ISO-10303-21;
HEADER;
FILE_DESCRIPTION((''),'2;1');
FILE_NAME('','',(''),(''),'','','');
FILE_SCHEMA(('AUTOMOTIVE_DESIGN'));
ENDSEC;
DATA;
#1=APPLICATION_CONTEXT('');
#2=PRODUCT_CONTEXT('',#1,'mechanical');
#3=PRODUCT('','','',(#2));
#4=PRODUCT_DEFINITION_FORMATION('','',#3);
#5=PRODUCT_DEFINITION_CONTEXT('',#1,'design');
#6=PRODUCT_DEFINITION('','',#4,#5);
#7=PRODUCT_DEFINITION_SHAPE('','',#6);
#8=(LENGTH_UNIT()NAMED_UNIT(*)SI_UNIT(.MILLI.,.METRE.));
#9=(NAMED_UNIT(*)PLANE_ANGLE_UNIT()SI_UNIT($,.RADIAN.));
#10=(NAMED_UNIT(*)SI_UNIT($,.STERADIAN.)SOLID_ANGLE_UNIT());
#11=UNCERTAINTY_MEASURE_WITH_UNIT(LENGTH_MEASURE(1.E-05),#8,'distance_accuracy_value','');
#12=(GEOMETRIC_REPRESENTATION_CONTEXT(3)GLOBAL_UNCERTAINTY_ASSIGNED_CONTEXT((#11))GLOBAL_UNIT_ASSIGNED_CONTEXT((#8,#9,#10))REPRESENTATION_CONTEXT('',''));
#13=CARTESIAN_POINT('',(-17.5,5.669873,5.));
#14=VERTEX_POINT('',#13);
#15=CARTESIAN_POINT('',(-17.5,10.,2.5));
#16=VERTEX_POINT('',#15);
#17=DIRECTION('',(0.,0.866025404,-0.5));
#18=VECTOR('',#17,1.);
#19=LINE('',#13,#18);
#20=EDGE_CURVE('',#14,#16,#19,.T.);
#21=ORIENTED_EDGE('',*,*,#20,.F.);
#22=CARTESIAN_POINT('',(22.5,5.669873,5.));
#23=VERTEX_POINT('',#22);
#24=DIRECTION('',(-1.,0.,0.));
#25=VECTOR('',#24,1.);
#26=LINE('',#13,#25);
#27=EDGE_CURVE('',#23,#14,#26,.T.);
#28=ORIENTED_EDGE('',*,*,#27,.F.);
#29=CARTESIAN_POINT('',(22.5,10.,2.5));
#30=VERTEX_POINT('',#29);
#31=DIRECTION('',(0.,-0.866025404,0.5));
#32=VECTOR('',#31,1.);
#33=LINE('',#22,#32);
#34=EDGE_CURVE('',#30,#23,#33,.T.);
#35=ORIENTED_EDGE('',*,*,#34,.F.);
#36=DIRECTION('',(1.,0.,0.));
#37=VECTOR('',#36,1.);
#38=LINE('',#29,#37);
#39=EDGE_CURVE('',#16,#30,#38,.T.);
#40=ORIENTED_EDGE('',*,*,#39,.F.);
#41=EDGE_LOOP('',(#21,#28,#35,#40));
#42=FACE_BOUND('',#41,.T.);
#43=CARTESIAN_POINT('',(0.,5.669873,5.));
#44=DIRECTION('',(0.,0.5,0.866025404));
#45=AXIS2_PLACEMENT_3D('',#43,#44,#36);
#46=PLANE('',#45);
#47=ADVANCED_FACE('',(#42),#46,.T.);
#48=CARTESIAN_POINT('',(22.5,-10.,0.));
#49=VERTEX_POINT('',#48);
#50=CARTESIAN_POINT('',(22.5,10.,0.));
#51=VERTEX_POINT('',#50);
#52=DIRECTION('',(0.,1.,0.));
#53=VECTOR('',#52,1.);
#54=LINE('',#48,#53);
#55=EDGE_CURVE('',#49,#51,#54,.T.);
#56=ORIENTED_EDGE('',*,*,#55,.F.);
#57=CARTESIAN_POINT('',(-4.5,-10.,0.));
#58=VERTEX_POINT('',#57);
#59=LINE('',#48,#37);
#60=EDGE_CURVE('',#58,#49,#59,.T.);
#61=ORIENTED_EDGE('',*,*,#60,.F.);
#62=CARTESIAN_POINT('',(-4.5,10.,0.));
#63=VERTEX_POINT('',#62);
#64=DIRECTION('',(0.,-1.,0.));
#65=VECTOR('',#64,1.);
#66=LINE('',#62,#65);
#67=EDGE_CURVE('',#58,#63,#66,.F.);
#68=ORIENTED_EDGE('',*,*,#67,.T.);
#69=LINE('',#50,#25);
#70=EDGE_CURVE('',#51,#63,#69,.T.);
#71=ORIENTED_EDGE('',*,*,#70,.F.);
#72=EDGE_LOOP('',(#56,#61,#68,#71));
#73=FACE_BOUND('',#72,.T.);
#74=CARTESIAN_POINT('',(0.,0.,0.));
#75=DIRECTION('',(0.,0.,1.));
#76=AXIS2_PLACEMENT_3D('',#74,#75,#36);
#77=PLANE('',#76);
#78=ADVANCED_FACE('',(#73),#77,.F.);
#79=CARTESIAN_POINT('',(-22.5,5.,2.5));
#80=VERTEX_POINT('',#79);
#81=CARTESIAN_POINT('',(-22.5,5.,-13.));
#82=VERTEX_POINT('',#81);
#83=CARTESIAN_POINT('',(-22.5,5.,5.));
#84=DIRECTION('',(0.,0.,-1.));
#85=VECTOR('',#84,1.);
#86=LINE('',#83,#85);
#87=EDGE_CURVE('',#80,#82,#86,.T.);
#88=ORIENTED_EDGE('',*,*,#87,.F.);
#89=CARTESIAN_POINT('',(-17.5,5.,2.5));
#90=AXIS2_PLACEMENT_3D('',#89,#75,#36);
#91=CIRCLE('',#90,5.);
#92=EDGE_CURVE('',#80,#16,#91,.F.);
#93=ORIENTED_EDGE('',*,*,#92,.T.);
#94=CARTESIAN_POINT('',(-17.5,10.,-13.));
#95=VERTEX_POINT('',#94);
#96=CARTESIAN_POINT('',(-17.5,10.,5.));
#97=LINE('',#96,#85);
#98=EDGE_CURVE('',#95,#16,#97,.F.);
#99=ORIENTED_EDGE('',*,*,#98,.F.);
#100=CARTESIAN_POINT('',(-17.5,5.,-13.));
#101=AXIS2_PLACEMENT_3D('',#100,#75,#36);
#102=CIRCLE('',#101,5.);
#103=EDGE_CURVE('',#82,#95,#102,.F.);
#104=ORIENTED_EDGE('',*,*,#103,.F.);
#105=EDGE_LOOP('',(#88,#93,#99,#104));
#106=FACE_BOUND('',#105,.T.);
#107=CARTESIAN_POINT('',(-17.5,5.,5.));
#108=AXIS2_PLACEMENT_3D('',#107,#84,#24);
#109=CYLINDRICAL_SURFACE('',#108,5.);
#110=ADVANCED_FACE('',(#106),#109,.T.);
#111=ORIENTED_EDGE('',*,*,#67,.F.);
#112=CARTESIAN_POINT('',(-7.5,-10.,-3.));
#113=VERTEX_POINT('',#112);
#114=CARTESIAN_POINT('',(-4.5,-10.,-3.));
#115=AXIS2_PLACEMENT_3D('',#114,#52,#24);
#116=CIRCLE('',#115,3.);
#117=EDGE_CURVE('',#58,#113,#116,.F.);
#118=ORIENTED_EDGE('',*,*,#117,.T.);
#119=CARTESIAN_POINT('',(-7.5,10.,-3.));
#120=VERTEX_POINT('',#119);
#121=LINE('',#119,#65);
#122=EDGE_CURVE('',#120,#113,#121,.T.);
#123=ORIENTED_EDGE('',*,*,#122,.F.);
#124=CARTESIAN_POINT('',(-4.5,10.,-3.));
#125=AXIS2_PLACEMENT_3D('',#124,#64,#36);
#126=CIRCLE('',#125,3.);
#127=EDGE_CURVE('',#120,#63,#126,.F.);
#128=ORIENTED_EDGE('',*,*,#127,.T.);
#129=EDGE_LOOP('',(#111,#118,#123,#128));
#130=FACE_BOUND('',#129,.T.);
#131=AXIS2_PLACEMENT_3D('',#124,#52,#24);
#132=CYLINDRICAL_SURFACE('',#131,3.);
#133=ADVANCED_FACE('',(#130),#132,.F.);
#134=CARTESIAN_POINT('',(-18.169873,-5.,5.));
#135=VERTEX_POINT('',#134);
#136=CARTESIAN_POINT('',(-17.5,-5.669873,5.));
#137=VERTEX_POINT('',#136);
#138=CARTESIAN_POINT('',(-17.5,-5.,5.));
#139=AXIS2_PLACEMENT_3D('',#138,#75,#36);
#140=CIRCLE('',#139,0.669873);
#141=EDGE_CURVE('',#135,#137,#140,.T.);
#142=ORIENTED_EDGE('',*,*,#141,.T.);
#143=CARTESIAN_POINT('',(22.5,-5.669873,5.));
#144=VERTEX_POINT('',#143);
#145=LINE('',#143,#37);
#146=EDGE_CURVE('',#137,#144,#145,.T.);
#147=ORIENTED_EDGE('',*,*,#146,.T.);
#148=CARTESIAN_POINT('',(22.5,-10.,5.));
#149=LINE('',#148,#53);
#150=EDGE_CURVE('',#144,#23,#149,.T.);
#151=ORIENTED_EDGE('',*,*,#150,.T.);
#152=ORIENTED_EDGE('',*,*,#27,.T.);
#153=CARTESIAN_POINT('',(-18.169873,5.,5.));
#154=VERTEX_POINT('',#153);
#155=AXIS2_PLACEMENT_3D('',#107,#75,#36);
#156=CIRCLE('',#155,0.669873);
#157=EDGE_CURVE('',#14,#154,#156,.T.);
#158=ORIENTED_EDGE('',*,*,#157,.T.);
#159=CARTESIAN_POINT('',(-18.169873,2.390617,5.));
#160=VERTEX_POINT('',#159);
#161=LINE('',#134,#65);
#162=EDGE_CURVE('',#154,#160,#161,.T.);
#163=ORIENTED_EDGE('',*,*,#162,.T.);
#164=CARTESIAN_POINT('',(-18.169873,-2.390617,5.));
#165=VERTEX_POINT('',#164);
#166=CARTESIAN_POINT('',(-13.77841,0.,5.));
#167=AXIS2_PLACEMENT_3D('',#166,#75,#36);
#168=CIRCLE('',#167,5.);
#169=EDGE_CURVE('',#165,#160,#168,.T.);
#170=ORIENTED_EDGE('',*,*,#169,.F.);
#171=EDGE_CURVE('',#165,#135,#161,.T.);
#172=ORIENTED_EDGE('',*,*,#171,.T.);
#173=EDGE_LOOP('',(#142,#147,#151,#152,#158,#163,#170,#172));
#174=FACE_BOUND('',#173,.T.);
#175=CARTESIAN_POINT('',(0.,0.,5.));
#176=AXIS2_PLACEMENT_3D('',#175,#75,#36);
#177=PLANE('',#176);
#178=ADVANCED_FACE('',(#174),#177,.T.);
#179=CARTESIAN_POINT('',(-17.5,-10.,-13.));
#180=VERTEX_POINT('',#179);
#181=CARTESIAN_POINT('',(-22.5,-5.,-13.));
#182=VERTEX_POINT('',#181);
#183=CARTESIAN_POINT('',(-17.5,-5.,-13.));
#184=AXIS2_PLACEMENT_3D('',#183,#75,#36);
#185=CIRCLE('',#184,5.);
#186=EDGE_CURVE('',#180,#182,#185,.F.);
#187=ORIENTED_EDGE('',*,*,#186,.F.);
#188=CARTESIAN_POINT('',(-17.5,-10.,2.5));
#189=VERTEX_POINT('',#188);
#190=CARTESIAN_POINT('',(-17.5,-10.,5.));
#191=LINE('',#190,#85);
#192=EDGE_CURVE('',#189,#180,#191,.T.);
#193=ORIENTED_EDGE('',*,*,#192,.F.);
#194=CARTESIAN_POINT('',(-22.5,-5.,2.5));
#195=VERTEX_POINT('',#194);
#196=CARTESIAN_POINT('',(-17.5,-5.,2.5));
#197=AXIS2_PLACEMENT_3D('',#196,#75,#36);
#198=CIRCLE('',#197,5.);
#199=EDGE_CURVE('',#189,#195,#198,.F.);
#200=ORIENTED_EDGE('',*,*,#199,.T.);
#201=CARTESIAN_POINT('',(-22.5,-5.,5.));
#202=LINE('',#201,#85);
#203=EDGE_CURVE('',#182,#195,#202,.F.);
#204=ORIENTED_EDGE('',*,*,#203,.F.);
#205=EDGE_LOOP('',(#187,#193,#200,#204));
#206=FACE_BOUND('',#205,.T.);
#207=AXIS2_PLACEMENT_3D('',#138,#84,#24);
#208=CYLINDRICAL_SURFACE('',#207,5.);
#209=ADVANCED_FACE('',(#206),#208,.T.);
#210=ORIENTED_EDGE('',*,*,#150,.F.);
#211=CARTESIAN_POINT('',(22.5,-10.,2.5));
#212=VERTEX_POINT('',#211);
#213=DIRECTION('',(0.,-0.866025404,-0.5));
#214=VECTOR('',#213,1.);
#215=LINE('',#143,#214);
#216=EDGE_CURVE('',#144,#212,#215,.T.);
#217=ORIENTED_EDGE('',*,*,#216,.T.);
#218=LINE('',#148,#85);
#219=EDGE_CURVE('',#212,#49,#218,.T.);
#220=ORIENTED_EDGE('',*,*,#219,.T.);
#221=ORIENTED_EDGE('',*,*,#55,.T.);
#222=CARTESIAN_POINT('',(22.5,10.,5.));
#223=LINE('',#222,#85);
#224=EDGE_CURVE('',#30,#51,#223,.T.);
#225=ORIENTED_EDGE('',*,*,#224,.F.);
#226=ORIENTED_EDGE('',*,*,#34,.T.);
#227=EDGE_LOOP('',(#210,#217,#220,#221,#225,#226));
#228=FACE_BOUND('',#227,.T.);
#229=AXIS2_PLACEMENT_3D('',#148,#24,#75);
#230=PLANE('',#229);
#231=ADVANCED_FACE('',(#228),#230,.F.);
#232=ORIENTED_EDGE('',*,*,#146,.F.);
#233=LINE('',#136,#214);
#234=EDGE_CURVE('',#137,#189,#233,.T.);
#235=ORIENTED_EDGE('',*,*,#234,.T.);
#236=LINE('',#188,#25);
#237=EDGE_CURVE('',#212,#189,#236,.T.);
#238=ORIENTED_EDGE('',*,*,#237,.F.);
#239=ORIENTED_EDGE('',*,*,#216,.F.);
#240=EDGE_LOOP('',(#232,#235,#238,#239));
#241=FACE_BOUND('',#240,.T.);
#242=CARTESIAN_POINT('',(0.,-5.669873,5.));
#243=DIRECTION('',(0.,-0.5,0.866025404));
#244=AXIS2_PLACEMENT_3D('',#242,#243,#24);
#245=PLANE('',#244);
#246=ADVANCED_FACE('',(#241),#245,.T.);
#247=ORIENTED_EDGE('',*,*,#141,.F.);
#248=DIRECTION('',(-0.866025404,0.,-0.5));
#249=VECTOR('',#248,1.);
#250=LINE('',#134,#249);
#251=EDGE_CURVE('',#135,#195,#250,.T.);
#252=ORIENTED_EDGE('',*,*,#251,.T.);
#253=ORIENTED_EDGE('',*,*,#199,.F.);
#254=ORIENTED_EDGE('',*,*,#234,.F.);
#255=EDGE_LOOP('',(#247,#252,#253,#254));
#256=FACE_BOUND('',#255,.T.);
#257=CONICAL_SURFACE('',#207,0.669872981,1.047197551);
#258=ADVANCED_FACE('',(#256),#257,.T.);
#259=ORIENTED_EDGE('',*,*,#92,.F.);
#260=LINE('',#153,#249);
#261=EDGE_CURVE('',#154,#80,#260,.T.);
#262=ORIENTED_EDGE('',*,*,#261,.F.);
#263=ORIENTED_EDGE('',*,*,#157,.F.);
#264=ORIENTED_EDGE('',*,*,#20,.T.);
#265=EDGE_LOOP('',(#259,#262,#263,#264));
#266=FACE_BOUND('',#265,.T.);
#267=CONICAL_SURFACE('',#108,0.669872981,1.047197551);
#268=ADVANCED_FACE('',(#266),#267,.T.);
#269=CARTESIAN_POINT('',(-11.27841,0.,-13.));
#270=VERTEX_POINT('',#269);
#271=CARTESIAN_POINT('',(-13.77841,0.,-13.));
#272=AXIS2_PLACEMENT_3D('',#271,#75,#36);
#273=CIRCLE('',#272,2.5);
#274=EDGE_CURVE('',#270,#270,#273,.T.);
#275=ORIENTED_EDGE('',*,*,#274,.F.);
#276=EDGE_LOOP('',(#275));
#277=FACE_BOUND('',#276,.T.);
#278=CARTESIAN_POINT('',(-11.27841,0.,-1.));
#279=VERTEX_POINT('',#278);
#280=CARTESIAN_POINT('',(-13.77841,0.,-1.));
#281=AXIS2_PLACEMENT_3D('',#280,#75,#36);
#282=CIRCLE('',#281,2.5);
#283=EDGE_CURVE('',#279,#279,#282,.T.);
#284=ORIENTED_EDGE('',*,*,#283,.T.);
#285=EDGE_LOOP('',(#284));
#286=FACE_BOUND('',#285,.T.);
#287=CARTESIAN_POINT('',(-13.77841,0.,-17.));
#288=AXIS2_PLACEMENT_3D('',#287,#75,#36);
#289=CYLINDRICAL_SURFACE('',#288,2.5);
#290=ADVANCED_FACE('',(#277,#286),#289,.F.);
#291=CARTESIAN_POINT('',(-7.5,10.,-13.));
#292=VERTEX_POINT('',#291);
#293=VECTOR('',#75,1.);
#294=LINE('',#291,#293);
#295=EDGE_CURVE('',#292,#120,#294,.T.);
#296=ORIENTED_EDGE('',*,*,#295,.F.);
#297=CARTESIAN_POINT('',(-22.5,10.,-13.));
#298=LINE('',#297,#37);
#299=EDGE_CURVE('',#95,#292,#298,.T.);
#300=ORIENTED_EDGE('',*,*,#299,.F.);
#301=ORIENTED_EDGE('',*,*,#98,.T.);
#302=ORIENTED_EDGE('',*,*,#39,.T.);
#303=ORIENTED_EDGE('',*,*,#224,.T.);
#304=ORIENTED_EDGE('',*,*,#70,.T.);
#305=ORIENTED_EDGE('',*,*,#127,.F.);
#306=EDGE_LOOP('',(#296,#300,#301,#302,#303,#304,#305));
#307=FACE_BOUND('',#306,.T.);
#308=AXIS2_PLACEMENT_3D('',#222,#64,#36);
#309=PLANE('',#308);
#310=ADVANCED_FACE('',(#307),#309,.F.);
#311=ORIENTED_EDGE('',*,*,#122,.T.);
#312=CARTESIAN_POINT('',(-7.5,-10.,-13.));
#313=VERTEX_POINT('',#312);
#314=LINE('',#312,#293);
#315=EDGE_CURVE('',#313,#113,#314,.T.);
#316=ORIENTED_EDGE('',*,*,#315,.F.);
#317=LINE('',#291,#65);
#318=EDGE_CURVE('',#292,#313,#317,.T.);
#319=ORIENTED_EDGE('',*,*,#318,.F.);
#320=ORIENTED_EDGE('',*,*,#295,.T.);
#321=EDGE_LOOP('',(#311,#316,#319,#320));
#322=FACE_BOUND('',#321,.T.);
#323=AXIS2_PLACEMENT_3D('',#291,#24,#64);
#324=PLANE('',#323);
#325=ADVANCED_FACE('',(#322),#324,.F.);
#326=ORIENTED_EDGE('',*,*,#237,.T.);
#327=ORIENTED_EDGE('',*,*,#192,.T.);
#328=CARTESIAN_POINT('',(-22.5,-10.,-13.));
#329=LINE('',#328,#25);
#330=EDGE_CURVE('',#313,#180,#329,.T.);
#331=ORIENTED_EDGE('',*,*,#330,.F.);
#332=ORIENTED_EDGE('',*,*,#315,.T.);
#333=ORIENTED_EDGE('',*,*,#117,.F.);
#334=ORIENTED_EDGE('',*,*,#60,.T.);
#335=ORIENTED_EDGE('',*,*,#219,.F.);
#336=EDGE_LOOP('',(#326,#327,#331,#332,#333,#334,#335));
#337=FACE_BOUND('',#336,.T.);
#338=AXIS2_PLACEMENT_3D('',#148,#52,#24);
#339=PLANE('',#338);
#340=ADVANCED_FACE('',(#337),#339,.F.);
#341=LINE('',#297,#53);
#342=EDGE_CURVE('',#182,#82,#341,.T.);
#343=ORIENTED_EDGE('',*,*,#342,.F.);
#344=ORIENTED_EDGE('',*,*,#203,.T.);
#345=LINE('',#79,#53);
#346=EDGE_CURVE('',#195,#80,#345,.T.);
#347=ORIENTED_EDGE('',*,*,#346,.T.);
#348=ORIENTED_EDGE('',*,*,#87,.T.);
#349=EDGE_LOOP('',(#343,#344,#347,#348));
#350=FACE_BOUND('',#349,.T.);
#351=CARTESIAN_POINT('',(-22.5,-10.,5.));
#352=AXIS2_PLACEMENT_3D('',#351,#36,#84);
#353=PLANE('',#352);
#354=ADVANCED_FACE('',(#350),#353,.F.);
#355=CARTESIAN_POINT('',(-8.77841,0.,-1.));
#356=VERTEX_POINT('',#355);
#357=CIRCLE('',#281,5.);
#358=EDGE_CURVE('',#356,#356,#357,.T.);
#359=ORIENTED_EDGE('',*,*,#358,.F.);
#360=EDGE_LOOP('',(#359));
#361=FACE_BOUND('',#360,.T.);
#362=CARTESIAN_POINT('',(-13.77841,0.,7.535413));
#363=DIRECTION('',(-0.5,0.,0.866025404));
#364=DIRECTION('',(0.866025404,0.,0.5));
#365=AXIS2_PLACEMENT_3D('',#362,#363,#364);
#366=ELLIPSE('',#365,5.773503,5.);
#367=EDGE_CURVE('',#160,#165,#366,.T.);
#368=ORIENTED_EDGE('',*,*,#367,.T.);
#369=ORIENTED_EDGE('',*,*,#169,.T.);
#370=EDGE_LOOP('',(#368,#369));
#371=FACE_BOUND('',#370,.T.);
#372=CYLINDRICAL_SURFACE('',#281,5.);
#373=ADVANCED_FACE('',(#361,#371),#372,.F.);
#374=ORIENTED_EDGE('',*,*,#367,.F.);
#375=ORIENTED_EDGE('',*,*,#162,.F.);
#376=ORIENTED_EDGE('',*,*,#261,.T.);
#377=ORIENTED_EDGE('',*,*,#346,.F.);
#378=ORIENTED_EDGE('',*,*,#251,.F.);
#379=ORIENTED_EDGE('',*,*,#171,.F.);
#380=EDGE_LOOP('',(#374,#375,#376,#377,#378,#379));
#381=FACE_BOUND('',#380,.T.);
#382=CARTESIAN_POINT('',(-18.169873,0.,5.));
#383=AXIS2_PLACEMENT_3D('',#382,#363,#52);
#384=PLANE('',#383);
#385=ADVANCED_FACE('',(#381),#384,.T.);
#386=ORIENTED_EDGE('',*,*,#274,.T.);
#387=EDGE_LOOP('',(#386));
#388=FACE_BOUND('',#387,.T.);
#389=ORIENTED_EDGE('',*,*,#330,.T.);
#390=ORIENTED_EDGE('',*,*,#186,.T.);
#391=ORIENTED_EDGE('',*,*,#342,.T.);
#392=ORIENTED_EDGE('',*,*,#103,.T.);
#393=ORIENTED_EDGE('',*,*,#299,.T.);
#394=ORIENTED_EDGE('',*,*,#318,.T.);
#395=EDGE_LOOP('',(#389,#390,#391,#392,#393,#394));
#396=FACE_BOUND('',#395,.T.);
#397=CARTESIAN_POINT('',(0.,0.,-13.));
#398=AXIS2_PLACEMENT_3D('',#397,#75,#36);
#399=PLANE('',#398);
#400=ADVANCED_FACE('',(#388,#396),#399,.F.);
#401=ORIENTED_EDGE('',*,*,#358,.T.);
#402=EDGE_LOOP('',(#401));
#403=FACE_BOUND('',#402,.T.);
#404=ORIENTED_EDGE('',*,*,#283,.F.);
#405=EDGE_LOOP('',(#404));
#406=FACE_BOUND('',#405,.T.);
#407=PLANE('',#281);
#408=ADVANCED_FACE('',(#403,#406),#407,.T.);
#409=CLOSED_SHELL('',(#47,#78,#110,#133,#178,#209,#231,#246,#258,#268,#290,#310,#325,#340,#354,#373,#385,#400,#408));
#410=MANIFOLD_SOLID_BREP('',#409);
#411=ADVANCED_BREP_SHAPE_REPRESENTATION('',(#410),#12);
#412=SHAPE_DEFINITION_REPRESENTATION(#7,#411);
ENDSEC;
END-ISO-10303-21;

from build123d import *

# Parameters (mm, degrees)
SKETCH1_W       = 45
SKETCH1_H       = 20
EXTRUDE1_DEPTH  = 5
SKETCH2_W       = 15
SKETCH2_H       = 20
EXTRUDE2_DEPTH  = 13
SKETCH3_R       = 5
EXTRUDE3_DEPTH  = 6
SKETCH4_R       = 2.5
EXTRUDE4_DEPTH  = 16
FILLET1_R       = 5
CHAMFER1_SIZE   = 4.330127019
CHAMFER1_SIZE_2 = 2.5
FILLET2_R       = 3


with BuildPart() as part:
    # Sketch1 → Extrude1 (new body)
    with BuildSketch(Plane.XY):
        Rectangle(SKETCH1_W, SKETCH1_H)
    extrude(amount=EXTRUDE1_DEPTH)

    # Sketch2 → Extrude2 (add)
    with BuildSketch(Plane(origin=(0, 0, 0), x_dir=(-1, 0, 0), z_dir=(0, 0, -1))):
        with Locations((15, 0)):
            Rectangle(SKETCH2_W, SKETCH2_H)
    extrude(amount=EXTRUDE2_DEPTH)

    # Sketch3 → Extrude3 (cut)
    with BuildSketch(Plane.XY.offset(5)):
        with Locations((-13.77840955, 0)):
            Circle(SKETCH3_R)
    extrude(amount=-EXTRUDE3_DEPTH, mode=Mode.SUBTRACT)

    # Sketch4 → Extrude4 (cut)
    with BuildSketch(Plane.XY.offset(-1)):
        with Locations((-13.77840955, 0)):
            Circle(SKETCH4_R)
    extrude(amount=-EXTRUDE4_DEPTH, mode=Mode.SUBTRACT)

    # Fillet1
    fillet1_edges = [part.edges().sort_by_distance(p)[0] for p in [
        (-22.5, 10, -4),
        (-22.5, -10, -4),
    ]]
    fillet(fillet1_edges, radius=FILLET1_R)

    # Chamfer1
    # the kernel refuses this chamfer: 4.330127019, 2.5 mm, written as the material it takes off along each edge
    with BuildSketch(Plane(origin=(-17.5, 10, 5), x_dir=(0, -0.999813220622208, 0.01932676561270069), z_dir=(1, 0, 0))) as chamfer1_piece_1:
        Polygon((CHAMFER1_SIZE * 0.999813220604, CHAMFER1_SIZE * 0.0193267656124), (-CHAMFER1_SIZE_2 * 0.0193267656127, CHAMFER1_SIZE_2 * 0.999813220622), (0, 0), align=None)
    extrude(amount=51.202409926, mode=Mode.SUBTRACT)
    with BuildSketch(Plane(origin=(33.702409926, -10, 5), x_dir=(0, -0.05789386240267114, -0.9983227437537926), z_dir=(-1, 0, 0))) as chamfer1_piece_2:
        Polygon((CHAMFER1_SIZE_2 * 0.998322743754, -CHAMFER1_SIZE_2 * 0.0578938624027), (-CHAMFER1_SIZE * 0.0578938624016, -CHAMFER1_SIZE * 0.998322743736), (0, 0), align=None)
    extrude(amount=51.202409926, mode=Mode.SUBTRACT)
    with BuildSketch(Plane(origin=(-22.5, -5, 5), x_dir=(0.999813220622208, 0, 0.01932676561270069), z_dir=(0, 1, 0))) as chamfer1_piece_3:
        Polygon((CHAMFER1_SIZE * 0.999813220604, CHAMFER1_SIZE * 0.0193267656124), (-CHAMFER1_SIZE_2 * 0.0193267656127, CHAMFER1_SIZE_2 * 0.999813220622), (0, 0), align=None)
    extrude(amount=10, mode=Mode.SUBTRACT)
    with BuildSketch(Plane(origin=(-17.5, 5, 5), x_dir=(-1, 0, 0), z_dir=(0, -1, 0))) as chamfer1_piece_4:
        Polygon((5 - CHAMFER1_SIZE, 0), (5, CHAMFER1_SIZE_2), (5, 0), align=None)
    revolve(axis=Axis((-17.5, 5, 5), (0, 0, -1)), revolution_arc=90, mode=Mode.SUBTRACT)
    with BuildSketch(Plane(origin=(-17.5, -5, 5), x_dir=(0, -1, 0), z_dir=(1, 0, 0))) as chamfer1_piece_5:
        Polygon((5 - CHAMFER1_SIZE, 0), (5, CHAMFER1_SIZE_2), (5, 0), align=None)
    revolve(axis=Axis((-17.5, -5, 5), (0, 0, -1)), revolution_arc=90, mode=Mode.SUBTRACT)

    # Fillet2
    fillet2_edges = [part.edges().sort_by_distance(p)[0] for p in [
        (-7.5, 0, 0),
    ]]
    fillet(fillet2_edges, radius=FILLET2_R)


solid = part.part
